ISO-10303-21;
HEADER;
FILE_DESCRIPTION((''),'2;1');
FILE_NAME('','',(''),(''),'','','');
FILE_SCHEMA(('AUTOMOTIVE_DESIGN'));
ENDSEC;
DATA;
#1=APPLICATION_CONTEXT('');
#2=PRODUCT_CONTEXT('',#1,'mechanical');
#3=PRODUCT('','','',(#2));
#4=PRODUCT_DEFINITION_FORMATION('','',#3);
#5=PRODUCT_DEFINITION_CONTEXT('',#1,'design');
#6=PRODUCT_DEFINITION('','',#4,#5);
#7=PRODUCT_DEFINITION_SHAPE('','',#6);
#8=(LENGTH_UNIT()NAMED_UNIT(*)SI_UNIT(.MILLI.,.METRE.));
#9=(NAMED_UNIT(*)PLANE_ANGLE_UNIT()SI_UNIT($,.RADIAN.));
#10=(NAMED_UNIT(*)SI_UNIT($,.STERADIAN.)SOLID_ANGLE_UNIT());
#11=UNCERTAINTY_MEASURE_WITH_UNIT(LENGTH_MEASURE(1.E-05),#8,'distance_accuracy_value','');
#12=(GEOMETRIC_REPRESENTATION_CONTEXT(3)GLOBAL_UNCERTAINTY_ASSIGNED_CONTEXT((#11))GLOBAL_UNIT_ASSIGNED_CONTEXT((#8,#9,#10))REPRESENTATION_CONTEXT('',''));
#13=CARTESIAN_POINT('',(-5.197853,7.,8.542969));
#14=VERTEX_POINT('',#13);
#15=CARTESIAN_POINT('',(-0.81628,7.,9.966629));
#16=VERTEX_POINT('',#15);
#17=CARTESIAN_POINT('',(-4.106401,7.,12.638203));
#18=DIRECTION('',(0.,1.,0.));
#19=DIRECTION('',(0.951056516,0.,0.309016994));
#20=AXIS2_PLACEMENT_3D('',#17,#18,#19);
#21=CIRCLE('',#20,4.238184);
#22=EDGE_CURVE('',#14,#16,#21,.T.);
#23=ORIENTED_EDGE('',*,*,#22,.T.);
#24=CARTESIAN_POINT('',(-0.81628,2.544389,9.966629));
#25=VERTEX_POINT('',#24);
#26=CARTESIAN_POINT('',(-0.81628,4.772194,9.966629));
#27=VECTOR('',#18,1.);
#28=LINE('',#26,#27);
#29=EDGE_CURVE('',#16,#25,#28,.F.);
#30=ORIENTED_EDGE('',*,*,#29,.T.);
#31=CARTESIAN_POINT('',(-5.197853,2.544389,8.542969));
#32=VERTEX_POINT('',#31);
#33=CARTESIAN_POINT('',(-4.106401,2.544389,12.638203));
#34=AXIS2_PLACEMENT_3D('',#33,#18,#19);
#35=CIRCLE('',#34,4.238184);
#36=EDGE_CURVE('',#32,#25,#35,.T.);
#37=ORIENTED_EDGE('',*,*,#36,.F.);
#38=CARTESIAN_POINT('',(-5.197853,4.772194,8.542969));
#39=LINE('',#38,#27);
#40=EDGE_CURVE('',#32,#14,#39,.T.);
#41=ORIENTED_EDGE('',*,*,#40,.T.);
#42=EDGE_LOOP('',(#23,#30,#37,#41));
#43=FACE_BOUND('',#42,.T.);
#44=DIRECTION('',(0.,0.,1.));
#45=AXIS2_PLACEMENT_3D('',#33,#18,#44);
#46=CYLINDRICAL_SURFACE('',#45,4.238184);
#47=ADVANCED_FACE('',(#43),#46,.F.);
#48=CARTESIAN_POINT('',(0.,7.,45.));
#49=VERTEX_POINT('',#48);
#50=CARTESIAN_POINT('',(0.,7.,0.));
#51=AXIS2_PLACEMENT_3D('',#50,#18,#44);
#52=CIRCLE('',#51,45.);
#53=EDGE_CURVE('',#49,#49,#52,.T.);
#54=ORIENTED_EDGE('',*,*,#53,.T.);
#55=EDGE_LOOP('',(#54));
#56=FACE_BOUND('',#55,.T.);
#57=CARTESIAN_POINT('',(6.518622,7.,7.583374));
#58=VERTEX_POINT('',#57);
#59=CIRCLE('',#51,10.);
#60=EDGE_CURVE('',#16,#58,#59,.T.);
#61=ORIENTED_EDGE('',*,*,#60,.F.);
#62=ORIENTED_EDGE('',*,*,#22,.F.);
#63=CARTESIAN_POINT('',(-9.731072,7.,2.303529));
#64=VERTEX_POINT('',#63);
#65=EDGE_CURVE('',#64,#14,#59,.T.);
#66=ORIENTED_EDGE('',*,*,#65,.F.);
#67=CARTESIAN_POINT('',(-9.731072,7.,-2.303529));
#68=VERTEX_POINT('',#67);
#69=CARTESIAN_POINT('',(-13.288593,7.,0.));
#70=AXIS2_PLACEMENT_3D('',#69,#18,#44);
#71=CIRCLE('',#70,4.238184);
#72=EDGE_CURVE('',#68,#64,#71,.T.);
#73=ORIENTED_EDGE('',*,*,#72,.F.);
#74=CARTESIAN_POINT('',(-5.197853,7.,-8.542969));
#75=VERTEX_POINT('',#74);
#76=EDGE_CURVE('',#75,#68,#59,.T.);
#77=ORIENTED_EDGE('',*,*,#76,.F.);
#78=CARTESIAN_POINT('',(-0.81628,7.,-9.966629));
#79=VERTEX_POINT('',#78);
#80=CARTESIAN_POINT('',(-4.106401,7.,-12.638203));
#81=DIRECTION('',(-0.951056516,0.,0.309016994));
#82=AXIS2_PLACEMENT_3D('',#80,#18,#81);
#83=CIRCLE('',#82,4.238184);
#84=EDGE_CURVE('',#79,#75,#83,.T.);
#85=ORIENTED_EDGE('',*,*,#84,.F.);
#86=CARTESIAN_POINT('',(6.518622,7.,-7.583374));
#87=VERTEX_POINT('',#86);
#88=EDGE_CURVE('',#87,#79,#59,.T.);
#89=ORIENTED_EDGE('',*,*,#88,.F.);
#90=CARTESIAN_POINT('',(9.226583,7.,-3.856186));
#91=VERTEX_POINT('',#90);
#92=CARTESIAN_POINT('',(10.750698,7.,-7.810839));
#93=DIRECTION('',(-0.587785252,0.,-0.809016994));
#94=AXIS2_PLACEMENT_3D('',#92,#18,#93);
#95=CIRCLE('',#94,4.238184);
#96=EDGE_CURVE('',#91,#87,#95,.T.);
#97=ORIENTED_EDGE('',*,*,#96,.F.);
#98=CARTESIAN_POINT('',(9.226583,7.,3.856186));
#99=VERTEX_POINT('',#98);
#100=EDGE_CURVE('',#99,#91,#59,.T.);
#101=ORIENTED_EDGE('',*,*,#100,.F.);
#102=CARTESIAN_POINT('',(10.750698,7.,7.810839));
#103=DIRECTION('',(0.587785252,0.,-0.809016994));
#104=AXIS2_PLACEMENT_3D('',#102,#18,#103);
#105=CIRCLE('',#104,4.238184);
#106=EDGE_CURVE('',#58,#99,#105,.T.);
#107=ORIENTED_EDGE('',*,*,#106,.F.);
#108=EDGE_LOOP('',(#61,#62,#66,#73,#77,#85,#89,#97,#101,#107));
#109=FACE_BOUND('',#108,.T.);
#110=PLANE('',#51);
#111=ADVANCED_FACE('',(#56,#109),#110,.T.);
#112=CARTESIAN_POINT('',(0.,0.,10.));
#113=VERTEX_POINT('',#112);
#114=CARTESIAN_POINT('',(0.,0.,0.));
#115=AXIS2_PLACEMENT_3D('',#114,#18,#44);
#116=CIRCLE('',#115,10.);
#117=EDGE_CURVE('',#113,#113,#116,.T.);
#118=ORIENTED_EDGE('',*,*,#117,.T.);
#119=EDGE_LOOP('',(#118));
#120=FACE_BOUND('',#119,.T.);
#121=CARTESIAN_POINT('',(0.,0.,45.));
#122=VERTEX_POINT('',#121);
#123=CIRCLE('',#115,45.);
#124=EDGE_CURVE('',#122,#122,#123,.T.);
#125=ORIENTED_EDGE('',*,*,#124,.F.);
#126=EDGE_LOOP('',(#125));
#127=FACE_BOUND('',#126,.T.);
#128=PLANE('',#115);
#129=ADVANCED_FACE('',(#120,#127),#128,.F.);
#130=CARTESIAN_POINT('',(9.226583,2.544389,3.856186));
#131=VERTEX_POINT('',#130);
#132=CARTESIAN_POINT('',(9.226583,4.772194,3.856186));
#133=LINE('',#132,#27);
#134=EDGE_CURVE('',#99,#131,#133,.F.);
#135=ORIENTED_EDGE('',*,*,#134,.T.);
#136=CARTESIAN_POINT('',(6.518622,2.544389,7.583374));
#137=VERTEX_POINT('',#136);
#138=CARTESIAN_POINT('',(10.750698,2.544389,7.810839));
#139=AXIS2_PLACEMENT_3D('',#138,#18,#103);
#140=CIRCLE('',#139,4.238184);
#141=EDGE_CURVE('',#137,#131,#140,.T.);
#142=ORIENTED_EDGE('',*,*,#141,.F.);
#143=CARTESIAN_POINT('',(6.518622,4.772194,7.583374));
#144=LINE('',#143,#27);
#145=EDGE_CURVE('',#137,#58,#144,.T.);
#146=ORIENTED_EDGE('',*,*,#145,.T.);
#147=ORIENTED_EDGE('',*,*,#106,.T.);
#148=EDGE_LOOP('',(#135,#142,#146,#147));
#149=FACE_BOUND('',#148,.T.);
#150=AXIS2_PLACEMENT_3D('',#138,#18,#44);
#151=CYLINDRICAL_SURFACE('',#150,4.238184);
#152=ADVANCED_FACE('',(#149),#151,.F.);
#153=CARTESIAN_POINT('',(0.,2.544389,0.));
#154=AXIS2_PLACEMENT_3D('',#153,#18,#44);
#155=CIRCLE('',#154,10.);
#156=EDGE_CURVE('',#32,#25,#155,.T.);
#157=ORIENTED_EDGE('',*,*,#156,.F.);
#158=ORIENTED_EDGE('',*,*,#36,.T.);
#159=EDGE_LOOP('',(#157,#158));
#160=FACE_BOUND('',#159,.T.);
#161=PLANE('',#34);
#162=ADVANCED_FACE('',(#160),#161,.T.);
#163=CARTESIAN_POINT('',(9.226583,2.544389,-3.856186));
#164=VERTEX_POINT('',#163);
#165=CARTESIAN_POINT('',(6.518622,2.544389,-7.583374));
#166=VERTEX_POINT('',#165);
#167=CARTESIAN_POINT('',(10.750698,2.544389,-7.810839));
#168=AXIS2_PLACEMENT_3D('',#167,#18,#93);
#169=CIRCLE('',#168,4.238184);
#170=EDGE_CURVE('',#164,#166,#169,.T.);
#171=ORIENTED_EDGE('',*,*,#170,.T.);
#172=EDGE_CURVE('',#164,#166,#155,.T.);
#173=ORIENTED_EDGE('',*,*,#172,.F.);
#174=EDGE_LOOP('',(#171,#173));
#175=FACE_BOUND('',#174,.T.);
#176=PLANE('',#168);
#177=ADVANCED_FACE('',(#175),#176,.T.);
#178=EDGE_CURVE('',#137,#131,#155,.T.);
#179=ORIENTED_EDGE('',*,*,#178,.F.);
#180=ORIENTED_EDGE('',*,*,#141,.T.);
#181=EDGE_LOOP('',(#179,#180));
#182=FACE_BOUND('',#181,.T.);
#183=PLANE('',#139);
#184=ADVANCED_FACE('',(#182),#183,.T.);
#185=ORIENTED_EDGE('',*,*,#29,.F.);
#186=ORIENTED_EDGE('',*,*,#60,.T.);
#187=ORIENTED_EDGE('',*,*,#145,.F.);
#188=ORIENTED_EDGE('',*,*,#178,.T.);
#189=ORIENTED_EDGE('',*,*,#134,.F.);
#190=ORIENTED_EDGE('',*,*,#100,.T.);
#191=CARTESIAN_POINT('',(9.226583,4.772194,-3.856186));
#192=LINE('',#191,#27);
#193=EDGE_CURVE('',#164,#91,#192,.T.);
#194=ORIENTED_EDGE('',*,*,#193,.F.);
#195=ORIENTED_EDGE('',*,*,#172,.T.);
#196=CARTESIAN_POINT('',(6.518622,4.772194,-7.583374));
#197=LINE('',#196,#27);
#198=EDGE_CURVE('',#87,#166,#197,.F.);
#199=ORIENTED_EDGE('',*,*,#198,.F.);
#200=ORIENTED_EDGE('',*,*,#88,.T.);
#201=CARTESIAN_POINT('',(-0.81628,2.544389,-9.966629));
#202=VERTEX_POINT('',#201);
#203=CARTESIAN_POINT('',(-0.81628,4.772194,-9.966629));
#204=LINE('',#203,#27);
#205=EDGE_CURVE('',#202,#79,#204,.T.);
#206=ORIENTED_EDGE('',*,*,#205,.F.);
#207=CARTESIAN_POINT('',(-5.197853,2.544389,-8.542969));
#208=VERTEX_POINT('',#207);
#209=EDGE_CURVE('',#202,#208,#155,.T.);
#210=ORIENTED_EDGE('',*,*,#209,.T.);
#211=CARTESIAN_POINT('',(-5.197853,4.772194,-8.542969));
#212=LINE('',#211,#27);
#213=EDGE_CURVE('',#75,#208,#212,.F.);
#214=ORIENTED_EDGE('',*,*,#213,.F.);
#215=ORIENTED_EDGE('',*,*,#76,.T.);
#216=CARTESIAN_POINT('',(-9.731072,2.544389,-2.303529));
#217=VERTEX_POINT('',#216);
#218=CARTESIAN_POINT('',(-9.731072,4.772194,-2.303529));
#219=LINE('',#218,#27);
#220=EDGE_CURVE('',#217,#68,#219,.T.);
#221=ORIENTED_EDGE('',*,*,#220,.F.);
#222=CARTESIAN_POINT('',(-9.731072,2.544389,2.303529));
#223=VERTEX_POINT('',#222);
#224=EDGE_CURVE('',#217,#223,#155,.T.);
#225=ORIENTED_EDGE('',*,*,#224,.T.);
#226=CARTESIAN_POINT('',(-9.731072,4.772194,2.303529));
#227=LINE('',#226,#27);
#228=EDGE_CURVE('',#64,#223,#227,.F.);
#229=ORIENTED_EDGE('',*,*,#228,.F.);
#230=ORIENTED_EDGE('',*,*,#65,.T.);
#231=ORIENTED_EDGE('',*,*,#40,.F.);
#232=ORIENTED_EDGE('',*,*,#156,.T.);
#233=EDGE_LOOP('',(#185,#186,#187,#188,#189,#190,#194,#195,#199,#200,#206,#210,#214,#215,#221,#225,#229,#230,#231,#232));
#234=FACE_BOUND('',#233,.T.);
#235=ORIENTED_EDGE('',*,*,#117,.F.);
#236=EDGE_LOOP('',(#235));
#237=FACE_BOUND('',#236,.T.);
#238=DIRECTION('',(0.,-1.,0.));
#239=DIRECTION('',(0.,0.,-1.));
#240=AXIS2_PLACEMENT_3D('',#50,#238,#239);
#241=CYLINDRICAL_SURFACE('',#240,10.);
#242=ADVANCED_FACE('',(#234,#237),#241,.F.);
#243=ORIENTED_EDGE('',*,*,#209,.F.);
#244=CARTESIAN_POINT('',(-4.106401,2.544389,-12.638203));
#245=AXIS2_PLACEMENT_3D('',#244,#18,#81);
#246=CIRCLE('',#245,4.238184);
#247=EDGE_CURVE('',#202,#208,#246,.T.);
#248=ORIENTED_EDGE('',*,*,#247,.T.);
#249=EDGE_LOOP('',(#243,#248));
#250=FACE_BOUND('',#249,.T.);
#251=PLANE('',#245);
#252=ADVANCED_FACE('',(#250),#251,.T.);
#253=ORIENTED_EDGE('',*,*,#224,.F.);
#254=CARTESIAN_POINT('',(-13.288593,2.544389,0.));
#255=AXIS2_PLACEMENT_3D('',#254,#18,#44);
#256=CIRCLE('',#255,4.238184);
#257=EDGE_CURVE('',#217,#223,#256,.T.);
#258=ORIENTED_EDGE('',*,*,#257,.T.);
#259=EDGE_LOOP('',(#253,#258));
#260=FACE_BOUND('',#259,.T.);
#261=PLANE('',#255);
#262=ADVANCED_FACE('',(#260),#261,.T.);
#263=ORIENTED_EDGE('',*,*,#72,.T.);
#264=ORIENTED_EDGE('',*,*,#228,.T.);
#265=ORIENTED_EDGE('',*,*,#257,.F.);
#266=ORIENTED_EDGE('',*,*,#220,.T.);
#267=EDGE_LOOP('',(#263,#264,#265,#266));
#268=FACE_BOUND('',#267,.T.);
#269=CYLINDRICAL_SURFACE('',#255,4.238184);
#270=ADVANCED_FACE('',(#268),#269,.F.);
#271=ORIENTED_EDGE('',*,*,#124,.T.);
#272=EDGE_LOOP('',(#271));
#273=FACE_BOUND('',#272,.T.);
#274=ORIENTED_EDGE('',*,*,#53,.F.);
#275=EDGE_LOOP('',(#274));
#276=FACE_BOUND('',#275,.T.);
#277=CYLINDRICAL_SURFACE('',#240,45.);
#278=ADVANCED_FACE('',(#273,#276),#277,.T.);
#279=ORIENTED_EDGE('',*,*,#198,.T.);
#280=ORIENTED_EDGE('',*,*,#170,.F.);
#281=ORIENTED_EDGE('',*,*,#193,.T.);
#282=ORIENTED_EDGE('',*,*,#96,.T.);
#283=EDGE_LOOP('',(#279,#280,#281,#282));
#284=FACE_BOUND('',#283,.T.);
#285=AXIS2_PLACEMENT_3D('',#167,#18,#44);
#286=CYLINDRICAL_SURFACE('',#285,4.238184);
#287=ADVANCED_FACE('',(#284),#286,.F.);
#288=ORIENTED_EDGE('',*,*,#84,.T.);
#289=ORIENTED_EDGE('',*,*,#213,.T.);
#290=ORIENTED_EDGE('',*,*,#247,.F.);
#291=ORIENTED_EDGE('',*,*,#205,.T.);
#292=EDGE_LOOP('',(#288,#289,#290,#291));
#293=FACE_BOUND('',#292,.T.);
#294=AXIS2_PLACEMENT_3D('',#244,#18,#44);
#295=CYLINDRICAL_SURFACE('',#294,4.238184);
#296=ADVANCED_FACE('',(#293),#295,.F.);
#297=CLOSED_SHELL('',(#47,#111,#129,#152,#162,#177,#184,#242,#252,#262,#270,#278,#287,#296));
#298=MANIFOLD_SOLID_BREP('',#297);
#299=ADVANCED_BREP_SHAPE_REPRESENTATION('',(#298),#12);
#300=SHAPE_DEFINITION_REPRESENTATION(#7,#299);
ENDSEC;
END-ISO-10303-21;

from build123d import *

# Parameters (mm, degrees)
SKETCH1_R           = 45
BOSS_EXTRUDE1_DEPTH = 7
SKETCH2_R           = 10
CUT_EXTRUDE1_DEPTH  = 65.02343321
SKETCH3_R           = 4.238184121
CUT_EXTRUDE2_DEPTH  = 4.455611112
CIRPATTERN1_COUNT   = 5


with BuildPart() as part:
    # Sketch1 → Boss-Extrude1 (new body)
    with BuildSketch(Plane(origin=(0, 0, 0), x_dir=(1, 0, 0), z_dir=(0, 1, 0))):
        Circle(SKETCH1_R)
    extrude(amount=BOSS_EXTRUDE1_DEPTH)

    # Sketch2 → Cut-Extrude1 (cut, through all)
    with BuildSketch(Plane(origin=(0, 0, 0), x_dir=(1, 0, 0), z_dir=(0, 1, 0))):
        Circle(SKETCH2_R)
    extrude(amount=CUT_EXTRUDE1_DEPTH, mode=Mode.SUBTRACT)

    # Sketch3 → Cut-Extrude2 (cut)
    with BuildSketch(Plane(origin=(0, 7, 0), x_dir=(1, 0, 0), z_dir=(0, 1, 0))):
        with Locations((-13.288593081, 0)):
            Circle(SKETCH3_R)
    cut_extrude2 = extrude(amount=-CUT_EXTRUDE2_DEPTH, mode=Mode.SUBTRACT)

    # CirPattern1: Cut-Extrude2 ×5 about axis
    cirpattern1_axis = Axis((0, 0, 0), (0, 1, 0))
    for i in range(1, CIRPATTERN1_COUNT):
        add(cut_extrude2.rotate(cirpattern1_axis, i * 360 / CIRPATTERN1_COUNT), mode=Mode.SUBTRACT)


solid = part.part
